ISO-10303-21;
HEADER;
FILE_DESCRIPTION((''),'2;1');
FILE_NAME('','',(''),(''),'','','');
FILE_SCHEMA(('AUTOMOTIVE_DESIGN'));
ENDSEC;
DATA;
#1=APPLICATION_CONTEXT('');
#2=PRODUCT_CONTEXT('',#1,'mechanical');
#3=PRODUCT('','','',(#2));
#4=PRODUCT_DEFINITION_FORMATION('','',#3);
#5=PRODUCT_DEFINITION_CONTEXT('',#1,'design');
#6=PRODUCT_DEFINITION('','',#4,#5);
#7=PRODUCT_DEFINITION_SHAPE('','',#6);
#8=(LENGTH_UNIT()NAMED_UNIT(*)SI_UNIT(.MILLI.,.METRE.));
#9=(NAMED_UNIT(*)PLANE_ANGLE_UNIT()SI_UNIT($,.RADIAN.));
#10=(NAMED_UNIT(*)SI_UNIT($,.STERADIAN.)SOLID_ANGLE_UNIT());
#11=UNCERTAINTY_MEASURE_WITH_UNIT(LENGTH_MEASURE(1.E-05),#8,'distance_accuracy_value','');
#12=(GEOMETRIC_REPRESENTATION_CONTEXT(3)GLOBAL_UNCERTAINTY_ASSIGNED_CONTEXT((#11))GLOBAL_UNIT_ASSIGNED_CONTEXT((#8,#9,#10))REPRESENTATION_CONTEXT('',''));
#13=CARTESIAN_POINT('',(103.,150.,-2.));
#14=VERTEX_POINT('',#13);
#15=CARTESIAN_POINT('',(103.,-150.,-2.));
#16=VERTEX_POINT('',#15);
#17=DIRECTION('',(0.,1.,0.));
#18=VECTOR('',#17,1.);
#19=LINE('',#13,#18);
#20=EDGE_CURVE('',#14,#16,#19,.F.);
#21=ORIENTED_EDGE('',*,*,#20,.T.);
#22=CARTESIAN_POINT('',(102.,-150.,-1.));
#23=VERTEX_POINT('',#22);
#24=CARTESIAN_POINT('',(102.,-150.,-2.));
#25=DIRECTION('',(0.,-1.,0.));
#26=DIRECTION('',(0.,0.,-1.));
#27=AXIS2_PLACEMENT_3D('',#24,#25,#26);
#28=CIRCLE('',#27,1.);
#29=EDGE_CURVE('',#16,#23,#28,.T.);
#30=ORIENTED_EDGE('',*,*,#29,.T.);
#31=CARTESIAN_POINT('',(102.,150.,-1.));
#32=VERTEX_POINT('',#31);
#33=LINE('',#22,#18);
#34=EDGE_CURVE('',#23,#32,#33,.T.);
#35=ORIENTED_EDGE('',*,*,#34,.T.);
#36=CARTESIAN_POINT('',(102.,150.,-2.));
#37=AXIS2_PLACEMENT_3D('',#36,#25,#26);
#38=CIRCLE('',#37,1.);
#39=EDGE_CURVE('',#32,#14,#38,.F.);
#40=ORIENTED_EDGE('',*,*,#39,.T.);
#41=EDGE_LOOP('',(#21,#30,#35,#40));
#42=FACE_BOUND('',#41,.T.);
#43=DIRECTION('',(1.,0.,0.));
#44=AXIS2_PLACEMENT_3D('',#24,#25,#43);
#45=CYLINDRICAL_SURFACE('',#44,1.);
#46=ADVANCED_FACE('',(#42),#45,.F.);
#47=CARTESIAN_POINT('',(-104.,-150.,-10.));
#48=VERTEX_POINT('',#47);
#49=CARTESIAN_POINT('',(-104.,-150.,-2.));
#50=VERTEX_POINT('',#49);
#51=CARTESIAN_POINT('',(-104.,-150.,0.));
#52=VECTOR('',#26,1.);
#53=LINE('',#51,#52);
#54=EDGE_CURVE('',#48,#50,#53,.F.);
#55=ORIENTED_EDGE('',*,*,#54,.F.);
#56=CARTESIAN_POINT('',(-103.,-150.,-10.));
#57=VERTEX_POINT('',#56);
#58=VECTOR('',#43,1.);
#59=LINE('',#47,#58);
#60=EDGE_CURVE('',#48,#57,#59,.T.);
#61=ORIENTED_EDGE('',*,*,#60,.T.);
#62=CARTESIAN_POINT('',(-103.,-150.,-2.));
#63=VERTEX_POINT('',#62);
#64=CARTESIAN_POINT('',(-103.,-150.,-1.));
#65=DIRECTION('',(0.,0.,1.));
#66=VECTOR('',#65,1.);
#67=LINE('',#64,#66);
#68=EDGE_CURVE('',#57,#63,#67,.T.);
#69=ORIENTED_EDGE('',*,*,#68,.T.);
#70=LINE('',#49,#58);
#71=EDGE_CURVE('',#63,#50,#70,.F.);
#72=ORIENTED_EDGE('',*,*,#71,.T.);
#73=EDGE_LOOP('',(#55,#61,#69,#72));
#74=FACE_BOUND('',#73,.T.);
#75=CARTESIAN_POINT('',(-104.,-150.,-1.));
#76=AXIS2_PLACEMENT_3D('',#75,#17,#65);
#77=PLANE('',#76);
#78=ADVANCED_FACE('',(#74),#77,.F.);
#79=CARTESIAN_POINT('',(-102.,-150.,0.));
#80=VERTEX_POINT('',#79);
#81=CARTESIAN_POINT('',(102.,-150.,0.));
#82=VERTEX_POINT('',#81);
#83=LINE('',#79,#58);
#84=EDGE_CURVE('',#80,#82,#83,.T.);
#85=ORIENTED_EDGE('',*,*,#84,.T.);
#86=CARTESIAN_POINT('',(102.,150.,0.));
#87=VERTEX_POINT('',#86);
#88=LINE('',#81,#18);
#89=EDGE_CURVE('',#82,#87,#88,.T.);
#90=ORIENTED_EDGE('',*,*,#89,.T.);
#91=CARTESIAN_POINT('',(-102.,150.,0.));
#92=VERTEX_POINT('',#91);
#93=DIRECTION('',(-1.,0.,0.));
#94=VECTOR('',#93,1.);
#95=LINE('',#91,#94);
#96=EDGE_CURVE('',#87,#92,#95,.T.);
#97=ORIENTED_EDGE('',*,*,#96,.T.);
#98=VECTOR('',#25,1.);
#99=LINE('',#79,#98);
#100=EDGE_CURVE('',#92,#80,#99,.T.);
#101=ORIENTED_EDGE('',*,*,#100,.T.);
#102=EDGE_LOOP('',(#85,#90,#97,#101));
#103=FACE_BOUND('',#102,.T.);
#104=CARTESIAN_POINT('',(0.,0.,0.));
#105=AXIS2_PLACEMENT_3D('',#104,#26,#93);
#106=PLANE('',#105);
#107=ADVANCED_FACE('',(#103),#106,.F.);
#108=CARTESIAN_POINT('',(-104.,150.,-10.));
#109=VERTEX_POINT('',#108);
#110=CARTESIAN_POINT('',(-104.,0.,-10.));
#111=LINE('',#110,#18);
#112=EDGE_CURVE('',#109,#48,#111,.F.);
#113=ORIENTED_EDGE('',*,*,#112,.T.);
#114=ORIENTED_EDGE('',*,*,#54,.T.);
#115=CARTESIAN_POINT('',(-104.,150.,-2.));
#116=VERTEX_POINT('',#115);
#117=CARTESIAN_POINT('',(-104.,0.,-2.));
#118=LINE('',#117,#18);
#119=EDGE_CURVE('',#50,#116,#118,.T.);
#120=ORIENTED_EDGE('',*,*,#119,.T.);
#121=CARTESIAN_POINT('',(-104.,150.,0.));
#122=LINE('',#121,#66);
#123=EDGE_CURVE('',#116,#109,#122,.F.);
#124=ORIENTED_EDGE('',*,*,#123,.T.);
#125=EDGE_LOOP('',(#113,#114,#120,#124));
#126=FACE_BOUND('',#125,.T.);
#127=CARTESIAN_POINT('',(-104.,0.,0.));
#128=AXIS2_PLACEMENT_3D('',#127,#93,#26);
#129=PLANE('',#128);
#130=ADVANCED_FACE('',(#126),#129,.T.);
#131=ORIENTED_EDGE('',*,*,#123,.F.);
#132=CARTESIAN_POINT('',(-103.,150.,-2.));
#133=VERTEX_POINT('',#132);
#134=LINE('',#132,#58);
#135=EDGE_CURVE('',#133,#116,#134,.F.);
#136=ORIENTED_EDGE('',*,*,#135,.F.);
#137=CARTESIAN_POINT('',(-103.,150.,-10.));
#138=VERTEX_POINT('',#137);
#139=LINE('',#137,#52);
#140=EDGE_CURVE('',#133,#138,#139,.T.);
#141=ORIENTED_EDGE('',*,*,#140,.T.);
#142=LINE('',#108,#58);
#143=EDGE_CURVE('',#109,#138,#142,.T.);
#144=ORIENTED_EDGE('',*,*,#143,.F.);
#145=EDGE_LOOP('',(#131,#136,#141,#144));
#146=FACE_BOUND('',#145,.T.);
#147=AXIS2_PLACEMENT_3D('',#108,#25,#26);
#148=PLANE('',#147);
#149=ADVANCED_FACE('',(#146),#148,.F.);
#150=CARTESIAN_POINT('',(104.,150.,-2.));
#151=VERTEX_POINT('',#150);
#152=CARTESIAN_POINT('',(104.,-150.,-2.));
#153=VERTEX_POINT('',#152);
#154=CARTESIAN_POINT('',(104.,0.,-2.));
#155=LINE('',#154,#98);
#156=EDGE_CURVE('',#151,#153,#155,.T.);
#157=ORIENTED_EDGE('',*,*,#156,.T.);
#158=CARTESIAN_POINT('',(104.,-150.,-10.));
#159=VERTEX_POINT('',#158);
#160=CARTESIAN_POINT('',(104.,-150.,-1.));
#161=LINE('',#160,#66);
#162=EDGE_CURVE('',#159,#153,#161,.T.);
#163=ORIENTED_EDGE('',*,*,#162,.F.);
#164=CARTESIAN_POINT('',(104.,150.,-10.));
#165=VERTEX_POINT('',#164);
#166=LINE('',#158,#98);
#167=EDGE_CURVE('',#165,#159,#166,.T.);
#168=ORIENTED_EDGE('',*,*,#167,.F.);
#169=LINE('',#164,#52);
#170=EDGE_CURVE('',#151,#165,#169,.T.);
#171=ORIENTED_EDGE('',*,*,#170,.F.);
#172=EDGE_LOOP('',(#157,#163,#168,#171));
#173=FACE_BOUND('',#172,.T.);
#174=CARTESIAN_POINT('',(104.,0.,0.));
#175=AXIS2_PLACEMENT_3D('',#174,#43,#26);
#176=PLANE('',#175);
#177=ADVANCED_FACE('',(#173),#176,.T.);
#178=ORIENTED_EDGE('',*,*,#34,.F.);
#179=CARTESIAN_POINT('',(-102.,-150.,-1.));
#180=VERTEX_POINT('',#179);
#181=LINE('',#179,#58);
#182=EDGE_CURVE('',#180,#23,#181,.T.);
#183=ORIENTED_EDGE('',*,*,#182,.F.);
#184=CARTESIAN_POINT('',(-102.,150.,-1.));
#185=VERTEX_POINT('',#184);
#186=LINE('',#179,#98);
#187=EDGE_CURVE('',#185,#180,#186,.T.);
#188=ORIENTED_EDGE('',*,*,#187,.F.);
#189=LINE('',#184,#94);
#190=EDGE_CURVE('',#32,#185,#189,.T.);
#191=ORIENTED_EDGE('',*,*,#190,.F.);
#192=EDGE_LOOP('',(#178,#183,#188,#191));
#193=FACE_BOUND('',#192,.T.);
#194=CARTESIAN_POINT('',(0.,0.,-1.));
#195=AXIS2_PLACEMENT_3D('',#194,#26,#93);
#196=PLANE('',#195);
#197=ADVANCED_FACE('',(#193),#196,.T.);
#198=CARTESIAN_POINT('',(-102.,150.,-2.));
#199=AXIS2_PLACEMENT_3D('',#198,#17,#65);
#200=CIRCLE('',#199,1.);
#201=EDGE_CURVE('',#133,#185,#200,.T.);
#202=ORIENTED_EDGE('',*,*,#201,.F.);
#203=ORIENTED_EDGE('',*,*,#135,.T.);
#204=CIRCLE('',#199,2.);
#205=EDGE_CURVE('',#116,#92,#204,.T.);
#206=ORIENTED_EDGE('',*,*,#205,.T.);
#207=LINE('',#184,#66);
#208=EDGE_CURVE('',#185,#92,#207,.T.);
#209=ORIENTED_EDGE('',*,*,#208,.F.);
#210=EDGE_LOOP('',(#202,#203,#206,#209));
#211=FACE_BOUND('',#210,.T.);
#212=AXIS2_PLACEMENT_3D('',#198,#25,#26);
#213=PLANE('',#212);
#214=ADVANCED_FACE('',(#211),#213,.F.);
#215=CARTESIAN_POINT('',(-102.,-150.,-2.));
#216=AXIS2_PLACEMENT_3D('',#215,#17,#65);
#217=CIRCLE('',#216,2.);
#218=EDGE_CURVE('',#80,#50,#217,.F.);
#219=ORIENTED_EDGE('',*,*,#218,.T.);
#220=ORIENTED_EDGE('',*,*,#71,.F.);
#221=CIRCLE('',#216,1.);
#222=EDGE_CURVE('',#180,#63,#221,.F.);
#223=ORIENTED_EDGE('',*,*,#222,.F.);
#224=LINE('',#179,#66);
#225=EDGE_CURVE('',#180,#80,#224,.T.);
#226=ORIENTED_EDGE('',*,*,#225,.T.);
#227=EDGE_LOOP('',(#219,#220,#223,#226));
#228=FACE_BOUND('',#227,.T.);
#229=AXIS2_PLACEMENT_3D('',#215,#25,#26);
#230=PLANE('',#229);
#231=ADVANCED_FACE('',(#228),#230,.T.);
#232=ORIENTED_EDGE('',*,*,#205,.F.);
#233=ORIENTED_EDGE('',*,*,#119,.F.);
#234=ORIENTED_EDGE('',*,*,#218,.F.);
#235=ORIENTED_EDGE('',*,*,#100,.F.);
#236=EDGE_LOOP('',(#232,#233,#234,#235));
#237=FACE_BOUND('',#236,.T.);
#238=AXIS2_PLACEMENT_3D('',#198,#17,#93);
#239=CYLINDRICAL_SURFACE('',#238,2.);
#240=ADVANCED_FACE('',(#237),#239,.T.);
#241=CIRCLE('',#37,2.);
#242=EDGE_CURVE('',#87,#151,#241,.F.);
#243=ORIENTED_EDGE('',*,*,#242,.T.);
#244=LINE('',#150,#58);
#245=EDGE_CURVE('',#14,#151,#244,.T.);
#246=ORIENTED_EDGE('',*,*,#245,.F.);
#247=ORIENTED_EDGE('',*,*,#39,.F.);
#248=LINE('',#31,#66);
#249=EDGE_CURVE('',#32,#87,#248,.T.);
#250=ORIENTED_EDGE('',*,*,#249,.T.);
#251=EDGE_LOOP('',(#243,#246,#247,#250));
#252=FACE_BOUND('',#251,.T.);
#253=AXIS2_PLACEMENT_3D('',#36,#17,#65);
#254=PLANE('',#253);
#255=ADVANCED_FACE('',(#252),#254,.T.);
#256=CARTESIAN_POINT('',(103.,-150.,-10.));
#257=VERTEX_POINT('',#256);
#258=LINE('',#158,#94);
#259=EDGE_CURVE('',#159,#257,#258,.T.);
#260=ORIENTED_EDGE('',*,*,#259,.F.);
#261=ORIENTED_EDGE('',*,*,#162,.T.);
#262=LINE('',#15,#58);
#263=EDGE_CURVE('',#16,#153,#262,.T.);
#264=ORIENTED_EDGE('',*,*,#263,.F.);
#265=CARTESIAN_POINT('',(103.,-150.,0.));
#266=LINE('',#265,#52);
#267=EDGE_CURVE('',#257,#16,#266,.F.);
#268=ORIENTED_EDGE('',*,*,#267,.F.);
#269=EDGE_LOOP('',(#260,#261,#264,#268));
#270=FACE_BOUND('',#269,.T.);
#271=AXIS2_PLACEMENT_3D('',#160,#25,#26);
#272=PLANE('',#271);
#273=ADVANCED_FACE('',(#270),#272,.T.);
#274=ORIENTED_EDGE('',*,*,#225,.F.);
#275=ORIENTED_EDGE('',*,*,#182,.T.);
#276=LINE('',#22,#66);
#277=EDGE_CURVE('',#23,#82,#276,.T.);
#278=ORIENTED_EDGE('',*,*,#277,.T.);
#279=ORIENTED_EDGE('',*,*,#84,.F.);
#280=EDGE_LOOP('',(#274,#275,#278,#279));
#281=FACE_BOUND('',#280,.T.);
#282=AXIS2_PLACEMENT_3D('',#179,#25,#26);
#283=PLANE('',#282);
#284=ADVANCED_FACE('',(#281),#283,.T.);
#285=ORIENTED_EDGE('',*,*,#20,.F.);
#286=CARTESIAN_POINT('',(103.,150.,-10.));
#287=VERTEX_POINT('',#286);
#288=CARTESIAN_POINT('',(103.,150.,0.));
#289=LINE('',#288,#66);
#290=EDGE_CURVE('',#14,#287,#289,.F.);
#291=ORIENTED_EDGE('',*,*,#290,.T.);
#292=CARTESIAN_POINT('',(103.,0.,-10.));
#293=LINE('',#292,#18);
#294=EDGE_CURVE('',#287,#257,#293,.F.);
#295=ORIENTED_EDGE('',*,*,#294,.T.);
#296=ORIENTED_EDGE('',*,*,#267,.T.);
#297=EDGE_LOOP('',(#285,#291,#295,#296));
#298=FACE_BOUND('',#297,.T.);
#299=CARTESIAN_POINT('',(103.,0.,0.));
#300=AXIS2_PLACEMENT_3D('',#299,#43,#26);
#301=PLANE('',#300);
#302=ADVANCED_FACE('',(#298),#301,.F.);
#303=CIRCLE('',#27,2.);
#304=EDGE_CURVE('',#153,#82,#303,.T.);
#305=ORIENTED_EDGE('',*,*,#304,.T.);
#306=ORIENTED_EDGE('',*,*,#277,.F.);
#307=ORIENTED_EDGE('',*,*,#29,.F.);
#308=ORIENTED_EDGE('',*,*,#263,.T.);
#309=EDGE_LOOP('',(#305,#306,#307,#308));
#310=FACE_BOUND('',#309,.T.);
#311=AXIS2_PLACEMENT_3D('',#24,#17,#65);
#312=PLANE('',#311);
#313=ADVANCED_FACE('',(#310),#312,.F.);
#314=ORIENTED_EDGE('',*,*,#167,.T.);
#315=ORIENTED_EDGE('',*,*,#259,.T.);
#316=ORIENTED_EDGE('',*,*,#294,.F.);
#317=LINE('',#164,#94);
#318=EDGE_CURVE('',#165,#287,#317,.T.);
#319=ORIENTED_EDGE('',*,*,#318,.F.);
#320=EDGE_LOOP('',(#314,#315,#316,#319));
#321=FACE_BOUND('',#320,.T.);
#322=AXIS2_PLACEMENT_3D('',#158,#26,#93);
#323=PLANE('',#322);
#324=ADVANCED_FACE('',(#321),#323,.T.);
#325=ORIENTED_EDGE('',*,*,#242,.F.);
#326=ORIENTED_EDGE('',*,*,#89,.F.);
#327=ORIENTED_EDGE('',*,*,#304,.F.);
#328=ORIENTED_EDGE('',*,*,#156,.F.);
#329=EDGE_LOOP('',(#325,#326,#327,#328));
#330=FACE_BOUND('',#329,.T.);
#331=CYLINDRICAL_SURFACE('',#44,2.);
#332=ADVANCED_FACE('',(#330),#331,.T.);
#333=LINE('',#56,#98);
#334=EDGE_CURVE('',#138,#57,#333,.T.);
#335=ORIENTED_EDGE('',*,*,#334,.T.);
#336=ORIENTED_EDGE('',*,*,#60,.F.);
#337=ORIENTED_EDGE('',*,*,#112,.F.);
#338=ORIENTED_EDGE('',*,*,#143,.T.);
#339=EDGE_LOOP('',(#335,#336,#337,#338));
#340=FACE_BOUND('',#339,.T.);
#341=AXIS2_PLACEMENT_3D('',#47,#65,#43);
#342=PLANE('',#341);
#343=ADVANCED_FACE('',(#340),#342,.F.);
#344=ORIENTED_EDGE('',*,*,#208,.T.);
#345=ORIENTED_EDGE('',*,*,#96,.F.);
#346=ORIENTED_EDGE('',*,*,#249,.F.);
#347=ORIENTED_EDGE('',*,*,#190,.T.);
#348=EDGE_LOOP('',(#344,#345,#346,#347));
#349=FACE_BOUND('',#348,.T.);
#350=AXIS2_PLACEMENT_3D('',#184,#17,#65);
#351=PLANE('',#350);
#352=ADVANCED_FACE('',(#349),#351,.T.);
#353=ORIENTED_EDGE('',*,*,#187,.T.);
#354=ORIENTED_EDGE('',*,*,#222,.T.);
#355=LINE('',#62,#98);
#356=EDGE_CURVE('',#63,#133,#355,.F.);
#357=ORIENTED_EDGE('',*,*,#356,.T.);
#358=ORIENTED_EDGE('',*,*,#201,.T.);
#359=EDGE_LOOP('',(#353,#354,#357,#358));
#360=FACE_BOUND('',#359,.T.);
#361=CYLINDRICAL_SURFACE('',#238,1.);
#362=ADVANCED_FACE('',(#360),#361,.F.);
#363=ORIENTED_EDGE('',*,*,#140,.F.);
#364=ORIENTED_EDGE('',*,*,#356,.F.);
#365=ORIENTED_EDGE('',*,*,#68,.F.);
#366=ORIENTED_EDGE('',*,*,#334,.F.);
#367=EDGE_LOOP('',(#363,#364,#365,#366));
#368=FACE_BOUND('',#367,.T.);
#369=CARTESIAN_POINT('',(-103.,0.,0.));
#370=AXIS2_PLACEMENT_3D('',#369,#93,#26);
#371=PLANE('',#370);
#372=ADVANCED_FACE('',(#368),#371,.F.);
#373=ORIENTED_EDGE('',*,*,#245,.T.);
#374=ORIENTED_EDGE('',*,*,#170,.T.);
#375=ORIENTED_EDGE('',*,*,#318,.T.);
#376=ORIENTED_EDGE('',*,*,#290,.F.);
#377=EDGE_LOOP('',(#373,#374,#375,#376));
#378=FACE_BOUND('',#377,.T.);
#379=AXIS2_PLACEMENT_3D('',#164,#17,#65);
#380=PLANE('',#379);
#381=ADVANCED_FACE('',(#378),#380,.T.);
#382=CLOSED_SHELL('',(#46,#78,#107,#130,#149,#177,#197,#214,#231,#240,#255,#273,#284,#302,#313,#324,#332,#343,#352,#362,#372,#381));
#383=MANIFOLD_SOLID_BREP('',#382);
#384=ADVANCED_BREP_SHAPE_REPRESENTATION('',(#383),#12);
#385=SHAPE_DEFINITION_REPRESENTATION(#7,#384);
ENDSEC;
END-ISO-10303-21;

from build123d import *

# Parameters (mm, degrees)
SKETCH1_W          = 204
SKETCH1_H          = 300
BASE_FLANGE1_DEPTH = 1
EDGE_FLANGE1_DEPTH = 300


# Sheet-metal steps are written as plain solids
with BuildPart() as part:
    # Sketch1 → Base-Flange1 (new body)
    with BuildSketch(Plane.XY):
        Rectangle(SKETCH1_W, SKETCH1_H)
    extrude(amount=-BASE_FLANGE1_DEPTH)

    # Edge-Flange1 section (across the edge) → Edge-Flange1 (add)
    with BuildSketch(Plane(origin=(103, 150, -1), x_dir=(-1, 0, 0), z_dir=(0, -1, 0))):
        with BuildLine():
            Line((-1, 1), (-1, 9))
            Line((-1, 9), (0, 9))
            Line((0, 9), (0, 1))
            ThreePointArc((0, 1), (0.292893219, 0.292893219), (1, 0))
            Line((1, 0), (1, -1))
            ThreePointArc((1, -1), (-0.414213562, -0.414213562), (-1, 1))
        make_face()
    edge_flange1 = extrude(amount=EDGE_FLANGE1_DEPTH)

    # Mirror1: Edge-Flange1 across plane
    add(edge_flange1.mirror(Plane(origin=(0, 0, 0), x_dir=(0, 0, 1), z_dir=(1, 0, 0))))


solid = part.part
